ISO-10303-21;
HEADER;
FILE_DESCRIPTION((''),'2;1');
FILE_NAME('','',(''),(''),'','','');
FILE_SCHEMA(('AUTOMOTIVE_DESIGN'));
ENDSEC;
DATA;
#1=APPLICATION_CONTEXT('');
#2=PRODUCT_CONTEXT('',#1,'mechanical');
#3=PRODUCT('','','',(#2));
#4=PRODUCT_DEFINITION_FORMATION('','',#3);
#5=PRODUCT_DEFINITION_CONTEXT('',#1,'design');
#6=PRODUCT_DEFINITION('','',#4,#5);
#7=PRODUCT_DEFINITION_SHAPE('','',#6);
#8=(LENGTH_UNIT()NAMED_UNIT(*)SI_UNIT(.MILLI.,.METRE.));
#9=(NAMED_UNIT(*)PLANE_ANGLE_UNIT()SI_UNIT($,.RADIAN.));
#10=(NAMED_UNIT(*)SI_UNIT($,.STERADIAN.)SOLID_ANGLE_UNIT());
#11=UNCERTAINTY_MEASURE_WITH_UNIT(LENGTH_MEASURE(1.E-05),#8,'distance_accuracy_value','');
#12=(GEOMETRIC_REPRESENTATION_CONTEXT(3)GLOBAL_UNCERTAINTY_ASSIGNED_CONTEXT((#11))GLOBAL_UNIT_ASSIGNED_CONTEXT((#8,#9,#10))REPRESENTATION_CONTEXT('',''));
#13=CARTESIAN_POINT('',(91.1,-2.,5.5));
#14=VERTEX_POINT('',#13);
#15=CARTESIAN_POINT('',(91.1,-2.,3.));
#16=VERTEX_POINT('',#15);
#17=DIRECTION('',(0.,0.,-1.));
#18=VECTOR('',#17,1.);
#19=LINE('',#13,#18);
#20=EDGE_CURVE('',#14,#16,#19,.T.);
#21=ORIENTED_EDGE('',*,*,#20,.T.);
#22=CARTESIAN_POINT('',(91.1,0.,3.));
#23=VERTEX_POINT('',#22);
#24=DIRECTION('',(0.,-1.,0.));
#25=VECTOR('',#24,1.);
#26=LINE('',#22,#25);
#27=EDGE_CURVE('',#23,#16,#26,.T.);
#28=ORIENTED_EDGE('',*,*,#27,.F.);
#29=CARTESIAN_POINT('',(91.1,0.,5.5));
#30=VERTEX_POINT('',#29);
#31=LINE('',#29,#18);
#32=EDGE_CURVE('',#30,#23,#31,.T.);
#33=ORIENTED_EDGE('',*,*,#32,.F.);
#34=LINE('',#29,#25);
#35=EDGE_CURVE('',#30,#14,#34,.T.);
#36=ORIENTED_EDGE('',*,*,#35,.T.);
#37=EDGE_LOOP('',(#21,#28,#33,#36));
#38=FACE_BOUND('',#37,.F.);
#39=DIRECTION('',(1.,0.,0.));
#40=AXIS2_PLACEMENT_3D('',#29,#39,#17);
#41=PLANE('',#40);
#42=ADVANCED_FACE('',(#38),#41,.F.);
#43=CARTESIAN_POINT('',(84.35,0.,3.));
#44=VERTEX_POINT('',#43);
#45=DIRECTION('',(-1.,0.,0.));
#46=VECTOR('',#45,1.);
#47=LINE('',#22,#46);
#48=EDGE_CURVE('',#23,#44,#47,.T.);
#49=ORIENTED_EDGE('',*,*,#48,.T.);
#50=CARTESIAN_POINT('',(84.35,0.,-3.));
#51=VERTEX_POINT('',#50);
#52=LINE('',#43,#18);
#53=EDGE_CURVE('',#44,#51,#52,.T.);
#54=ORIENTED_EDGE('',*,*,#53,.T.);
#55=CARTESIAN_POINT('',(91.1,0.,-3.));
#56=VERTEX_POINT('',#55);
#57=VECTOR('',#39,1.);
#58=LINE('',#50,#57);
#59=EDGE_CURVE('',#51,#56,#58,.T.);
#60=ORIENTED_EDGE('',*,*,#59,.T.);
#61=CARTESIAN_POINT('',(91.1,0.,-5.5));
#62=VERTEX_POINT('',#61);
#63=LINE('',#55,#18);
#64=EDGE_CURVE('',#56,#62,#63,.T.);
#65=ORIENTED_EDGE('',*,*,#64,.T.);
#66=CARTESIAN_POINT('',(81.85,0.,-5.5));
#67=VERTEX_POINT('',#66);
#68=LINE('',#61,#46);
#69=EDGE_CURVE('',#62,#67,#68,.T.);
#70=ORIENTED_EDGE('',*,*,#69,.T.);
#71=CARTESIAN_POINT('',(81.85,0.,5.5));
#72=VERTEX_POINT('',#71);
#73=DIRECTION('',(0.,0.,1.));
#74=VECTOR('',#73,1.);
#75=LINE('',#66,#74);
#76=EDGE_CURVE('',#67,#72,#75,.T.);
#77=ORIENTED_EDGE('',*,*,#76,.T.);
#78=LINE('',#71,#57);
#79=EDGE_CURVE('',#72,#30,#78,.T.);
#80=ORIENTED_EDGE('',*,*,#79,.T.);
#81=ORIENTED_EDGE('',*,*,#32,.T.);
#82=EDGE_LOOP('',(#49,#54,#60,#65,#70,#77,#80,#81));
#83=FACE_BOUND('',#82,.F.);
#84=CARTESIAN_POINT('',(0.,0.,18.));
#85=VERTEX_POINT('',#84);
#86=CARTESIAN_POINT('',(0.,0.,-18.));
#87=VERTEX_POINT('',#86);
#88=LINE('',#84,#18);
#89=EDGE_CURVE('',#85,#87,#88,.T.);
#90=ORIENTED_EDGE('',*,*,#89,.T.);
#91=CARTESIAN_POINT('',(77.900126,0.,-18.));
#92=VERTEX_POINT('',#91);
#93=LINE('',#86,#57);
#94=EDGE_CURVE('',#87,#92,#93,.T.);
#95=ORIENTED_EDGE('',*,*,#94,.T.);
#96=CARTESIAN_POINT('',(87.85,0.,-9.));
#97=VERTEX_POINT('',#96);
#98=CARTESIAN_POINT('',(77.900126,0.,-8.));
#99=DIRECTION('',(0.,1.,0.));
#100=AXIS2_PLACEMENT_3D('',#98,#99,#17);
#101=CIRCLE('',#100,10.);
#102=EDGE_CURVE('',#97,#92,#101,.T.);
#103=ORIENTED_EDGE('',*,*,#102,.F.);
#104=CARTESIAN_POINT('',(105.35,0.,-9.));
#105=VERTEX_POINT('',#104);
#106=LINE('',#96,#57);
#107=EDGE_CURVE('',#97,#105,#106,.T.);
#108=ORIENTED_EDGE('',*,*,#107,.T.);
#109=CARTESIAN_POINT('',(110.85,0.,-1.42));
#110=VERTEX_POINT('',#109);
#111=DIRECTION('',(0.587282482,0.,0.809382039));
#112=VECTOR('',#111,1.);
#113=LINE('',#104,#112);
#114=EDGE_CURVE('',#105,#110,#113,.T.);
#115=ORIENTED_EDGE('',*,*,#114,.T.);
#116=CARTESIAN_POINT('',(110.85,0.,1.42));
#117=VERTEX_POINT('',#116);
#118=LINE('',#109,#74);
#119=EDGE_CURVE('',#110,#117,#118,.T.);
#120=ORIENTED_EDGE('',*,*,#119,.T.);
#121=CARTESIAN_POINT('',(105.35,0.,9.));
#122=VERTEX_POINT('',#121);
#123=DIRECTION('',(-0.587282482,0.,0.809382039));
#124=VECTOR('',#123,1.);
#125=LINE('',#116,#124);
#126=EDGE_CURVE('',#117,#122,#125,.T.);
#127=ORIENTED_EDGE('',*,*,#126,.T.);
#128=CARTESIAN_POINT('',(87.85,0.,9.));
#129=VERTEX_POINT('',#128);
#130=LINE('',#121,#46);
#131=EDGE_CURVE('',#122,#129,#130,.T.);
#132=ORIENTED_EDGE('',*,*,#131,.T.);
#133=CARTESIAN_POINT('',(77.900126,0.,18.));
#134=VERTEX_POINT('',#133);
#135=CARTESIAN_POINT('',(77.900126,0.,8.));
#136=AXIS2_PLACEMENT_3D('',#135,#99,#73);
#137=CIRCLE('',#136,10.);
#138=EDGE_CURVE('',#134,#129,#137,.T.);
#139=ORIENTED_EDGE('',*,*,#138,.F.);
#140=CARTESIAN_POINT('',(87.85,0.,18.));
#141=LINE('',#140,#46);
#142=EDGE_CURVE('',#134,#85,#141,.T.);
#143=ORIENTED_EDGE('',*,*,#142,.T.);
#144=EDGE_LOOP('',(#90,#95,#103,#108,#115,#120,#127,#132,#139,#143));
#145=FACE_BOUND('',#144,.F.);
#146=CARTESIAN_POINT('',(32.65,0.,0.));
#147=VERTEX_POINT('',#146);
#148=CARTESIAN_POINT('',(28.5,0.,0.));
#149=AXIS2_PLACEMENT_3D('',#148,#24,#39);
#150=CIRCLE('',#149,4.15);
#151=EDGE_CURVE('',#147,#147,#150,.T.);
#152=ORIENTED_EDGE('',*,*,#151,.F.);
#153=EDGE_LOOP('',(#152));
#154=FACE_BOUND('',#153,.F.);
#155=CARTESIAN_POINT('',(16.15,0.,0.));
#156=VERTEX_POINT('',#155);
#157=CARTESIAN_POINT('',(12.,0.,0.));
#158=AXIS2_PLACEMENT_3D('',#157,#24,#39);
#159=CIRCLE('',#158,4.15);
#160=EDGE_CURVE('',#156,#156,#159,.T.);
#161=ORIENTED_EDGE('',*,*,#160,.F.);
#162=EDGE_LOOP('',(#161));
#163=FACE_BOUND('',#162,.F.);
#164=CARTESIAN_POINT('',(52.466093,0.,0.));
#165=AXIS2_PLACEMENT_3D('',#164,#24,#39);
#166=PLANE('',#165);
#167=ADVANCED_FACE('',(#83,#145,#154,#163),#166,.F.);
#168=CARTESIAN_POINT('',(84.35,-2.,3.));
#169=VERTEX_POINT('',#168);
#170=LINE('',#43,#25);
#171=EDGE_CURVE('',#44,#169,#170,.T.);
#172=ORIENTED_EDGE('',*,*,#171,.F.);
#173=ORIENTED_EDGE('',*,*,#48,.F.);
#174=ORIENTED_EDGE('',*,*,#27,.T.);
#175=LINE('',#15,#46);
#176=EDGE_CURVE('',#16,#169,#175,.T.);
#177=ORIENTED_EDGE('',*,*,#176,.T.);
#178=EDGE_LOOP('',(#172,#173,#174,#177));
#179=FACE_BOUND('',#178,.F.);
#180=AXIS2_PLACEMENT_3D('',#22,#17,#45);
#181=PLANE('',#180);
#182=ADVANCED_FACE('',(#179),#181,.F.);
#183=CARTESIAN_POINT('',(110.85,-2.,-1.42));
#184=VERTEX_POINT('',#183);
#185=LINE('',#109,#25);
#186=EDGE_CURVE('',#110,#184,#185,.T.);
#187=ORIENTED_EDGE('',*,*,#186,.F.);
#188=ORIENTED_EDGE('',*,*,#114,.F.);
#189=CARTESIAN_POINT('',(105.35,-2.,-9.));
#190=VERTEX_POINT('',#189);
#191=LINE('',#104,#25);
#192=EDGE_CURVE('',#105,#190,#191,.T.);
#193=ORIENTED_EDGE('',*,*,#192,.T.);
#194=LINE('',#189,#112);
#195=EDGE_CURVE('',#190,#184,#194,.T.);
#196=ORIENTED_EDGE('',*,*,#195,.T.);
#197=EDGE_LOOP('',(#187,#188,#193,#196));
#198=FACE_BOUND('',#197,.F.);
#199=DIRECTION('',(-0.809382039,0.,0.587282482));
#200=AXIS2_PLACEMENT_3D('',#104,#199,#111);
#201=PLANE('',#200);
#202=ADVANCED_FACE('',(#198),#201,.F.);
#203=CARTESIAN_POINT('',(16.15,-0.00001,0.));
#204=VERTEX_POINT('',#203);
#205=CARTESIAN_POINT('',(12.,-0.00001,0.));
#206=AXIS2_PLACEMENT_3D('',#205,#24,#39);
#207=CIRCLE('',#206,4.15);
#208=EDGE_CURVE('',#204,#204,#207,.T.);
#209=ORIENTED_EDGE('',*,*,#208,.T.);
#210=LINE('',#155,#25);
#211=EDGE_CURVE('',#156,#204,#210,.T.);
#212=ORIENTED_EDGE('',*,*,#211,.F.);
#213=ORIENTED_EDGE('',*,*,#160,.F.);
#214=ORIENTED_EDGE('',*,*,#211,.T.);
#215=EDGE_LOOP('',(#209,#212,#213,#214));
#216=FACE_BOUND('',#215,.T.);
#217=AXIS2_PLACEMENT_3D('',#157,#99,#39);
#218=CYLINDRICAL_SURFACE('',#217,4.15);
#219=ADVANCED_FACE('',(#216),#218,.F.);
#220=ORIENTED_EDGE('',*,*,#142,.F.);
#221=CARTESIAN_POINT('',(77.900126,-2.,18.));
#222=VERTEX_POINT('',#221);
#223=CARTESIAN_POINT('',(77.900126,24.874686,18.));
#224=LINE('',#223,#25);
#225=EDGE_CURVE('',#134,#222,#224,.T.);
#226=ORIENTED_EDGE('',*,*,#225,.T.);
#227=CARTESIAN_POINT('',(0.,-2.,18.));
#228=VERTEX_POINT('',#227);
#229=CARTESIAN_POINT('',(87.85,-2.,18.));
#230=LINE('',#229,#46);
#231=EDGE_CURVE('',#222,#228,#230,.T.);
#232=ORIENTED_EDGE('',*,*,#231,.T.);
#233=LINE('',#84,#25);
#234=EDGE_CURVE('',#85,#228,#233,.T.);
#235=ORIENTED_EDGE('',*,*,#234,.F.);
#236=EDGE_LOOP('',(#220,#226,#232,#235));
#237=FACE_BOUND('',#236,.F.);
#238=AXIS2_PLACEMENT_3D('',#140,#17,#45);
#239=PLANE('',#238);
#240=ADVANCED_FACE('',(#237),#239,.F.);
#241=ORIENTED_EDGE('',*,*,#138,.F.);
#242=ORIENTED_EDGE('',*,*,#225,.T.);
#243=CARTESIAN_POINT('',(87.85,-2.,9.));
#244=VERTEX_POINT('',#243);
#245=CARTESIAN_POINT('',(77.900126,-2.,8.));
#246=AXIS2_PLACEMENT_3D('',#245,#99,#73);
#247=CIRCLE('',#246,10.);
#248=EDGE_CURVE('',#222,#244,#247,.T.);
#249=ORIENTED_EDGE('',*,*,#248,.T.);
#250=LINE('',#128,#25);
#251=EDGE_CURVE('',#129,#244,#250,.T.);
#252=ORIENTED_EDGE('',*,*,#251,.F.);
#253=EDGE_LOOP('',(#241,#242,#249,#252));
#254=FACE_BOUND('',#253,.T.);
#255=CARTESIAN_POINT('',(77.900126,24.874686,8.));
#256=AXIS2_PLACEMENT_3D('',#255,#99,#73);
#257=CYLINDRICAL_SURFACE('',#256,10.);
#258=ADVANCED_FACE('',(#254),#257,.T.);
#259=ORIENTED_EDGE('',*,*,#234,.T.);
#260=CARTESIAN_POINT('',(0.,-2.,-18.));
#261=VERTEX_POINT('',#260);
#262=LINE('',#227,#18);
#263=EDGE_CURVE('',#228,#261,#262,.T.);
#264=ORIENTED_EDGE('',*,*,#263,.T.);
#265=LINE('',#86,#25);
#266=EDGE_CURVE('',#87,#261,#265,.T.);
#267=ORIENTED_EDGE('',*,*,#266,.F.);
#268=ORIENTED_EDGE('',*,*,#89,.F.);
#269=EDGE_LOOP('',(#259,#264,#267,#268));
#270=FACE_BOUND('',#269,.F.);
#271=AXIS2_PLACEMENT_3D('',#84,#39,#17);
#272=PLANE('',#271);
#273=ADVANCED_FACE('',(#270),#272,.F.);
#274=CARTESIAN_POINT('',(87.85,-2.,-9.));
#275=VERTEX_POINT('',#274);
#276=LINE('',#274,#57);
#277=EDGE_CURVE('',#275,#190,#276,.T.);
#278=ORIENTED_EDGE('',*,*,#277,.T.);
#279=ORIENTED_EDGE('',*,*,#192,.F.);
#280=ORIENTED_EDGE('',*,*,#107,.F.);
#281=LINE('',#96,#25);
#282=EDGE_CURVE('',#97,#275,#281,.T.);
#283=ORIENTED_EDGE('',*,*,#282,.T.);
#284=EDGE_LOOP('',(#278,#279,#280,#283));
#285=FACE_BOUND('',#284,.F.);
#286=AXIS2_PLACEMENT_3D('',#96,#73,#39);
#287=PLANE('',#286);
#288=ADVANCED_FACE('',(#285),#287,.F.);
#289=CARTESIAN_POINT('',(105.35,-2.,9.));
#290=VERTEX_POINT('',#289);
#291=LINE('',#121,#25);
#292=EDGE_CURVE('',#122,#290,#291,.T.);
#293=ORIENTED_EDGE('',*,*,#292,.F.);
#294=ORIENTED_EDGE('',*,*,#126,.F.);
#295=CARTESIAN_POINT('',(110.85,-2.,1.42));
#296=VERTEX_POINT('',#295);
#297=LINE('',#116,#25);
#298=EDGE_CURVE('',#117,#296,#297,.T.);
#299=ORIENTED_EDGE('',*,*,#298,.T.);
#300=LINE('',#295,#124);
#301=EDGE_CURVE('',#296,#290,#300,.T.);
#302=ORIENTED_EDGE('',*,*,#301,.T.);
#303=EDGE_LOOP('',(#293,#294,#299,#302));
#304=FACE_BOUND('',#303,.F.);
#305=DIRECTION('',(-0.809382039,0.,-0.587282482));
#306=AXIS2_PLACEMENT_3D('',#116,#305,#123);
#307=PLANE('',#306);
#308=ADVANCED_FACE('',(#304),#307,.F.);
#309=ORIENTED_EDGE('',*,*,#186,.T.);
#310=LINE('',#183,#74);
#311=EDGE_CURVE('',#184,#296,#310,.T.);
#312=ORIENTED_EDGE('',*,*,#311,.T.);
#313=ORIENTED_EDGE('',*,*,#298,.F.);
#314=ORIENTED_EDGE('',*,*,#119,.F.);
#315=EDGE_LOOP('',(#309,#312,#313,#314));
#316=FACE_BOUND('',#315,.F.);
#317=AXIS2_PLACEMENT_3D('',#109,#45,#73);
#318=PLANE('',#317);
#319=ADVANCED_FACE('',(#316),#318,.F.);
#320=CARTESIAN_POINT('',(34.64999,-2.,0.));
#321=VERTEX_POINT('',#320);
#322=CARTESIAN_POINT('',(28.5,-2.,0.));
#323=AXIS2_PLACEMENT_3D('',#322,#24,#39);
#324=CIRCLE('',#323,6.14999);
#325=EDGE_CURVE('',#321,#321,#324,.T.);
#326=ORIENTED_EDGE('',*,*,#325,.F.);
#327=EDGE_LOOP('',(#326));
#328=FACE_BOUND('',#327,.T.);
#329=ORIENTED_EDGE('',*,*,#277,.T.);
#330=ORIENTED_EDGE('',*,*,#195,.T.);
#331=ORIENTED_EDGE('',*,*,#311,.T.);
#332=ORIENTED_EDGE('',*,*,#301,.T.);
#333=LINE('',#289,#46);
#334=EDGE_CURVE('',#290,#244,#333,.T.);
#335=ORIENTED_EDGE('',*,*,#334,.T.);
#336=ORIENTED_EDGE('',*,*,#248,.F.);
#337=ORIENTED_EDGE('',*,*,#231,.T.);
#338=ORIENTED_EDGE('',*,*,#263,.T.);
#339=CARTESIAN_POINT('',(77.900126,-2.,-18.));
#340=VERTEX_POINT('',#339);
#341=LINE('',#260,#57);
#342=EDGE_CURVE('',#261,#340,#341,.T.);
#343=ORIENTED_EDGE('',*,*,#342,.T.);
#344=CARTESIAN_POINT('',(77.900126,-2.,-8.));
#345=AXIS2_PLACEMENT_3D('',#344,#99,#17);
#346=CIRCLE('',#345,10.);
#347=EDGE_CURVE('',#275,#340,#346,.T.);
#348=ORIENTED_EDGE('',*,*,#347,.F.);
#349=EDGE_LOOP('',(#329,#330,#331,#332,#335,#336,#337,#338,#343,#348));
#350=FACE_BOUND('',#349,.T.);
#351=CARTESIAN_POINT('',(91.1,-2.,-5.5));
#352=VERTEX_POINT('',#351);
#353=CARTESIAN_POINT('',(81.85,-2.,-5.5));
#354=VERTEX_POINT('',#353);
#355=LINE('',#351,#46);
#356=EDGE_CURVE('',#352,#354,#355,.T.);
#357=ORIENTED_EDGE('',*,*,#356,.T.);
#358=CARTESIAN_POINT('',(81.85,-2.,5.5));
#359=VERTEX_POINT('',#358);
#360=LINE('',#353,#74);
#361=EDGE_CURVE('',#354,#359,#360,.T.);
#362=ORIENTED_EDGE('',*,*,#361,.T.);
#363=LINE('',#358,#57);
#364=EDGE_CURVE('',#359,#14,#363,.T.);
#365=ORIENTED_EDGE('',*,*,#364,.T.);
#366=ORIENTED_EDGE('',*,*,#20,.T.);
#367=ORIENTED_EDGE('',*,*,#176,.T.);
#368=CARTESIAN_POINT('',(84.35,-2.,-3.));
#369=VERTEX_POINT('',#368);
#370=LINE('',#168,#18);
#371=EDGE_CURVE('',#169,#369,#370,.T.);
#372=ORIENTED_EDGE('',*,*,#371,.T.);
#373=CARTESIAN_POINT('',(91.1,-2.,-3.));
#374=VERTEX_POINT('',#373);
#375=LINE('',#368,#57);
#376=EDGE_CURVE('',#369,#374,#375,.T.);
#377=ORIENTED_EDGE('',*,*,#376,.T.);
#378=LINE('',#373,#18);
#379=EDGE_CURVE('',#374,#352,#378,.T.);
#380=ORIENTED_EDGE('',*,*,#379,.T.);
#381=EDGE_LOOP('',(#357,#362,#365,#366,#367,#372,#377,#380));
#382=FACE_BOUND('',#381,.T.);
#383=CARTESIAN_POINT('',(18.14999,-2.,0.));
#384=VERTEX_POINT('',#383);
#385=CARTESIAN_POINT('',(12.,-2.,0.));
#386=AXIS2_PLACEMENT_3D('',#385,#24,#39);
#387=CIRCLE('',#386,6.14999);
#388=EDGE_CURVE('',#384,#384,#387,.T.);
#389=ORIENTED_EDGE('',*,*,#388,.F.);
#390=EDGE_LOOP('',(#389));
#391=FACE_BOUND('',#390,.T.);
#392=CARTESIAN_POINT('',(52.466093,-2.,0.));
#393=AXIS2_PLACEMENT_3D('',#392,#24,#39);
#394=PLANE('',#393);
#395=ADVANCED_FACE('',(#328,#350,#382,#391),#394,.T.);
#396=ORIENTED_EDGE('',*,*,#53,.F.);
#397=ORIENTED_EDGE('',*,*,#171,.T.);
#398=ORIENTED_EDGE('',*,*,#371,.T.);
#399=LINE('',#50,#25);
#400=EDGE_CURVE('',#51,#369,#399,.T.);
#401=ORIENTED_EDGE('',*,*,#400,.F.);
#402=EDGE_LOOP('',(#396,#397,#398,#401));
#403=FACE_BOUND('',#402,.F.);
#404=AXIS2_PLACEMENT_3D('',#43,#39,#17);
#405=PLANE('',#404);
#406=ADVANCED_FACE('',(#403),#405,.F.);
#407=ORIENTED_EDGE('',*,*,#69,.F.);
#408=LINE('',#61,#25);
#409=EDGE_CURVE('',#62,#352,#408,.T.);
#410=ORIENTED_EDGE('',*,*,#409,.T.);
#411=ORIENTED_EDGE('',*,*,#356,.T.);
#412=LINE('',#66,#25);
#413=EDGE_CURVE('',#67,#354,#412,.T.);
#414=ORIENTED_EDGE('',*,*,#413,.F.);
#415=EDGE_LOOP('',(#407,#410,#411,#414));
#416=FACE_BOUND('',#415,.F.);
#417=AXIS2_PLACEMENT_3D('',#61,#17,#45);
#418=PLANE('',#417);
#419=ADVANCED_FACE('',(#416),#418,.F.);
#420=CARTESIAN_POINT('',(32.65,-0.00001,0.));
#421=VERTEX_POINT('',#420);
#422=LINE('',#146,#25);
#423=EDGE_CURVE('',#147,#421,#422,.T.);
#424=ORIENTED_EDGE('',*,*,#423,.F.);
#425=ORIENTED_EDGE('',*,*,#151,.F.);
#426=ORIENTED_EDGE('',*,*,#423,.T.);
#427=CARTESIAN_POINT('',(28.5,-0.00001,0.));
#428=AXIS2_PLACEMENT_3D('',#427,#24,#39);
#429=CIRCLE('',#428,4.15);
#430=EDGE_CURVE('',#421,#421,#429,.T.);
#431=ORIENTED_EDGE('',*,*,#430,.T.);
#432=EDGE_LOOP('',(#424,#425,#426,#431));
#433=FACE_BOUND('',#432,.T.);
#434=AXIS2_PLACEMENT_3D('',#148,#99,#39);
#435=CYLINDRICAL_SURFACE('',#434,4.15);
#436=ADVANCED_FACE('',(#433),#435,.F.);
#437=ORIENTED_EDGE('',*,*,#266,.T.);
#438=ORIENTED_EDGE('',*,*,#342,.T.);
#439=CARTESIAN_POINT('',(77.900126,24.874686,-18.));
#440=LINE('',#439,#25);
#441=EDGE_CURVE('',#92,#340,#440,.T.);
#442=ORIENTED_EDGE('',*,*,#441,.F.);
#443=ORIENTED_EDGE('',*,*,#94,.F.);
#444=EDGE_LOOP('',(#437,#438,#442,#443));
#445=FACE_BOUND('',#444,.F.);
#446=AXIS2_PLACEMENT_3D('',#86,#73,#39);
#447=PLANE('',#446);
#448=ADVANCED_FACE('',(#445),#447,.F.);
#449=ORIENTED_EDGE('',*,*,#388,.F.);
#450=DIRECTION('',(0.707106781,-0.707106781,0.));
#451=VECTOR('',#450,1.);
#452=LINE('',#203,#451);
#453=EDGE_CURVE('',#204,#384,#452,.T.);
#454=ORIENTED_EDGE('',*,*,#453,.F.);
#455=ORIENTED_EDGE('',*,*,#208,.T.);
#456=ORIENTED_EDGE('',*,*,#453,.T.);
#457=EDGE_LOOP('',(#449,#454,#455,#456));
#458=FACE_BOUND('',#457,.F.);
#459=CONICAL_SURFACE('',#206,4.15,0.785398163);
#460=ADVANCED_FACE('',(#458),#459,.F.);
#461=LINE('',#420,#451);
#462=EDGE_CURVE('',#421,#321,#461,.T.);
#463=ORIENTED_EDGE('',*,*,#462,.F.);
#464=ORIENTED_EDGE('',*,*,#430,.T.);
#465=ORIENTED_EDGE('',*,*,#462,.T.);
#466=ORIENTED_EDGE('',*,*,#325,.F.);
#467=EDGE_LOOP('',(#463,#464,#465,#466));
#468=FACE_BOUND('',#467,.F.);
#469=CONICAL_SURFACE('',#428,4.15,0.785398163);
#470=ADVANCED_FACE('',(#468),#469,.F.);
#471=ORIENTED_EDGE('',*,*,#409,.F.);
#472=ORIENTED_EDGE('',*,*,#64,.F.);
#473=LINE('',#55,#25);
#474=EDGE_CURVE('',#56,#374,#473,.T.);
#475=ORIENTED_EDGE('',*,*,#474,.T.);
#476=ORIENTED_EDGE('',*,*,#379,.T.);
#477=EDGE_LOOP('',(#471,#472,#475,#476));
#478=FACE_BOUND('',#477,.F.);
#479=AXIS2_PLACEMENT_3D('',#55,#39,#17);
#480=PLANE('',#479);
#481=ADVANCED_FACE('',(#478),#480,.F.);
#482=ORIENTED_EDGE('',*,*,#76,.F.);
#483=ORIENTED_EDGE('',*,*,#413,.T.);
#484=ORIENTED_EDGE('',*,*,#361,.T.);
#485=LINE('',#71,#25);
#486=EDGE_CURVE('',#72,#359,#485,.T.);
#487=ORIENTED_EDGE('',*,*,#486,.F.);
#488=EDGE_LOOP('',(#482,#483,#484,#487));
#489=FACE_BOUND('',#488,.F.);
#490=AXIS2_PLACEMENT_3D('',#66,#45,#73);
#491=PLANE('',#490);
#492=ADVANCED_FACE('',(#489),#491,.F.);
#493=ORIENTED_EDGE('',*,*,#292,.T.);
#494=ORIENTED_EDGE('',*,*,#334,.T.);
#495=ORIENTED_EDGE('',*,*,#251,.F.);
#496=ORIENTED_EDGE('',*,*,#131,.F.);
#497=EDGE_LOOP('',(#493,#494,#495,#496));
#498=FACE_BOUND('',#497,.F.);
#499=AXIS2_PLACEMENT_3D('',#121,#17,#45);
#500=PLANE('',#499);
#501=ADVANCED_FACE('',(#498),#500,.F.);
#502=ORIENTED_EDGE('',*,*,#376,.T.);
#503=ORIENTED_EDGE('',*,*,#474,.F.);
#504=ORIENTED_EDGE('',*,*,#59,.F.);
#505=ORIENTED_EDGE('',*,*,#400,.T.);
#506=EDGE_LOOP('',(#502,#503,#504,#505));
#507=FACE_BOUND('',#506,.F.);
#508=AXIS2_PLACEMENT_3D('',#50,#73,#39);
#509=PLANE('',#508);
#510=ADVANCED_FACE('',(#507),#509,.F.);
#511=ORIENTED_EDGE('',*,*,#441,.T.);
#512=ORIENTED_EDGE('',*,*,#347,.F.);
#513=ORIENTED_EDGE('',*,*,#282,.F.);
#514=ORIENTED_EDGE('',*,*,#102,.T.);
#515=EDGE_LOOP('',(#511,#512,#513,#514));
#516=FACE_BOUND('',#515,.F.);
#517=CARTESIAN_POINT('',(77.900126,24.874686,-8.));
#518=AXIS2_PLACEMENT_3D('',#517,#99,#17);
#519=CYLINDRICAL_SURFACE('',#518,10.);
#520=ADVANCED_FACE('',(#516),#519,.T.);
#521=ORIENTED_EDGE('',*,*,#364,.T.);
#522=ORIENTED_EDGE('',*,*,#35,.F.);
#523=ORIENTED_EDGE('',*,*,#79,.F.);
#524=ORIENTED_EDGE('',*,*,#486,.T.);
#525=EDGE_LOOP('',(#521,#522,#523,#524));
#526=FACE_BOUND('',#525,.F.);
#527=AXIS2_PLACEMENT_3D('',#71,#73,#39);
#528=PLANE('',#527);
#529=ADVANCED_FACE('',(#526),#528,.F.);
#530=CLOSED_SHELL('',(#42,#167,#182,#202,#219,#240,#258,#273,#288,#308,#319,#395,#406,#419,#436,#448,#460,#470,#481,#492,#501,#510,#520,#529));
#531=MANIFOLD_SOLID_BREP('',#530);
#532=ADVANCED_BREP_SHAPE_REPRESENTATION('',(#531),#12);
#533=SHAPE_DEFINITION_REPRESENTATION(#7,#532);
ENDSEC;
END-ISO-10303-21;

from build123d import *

# Parameters (mm, degrees)
F0_R        = 4.15
F1_DEPTH    = 2
F2_SIZE     = 1.99999
F3_T1_DEPTH = 51.7493718553


# Not quite as in the source:
# - a fillet or chamfer that OpenCascade refuses, or shapes differently, is made with other operations: its cross-section is extruded or revolved along the edge and cut away or added
# - a fillet or chamfer is up to 0.001 mm smaller than in the source, because OpenCascade refuses the exact size


with BuildPart() as f1:
    # F0 (on Front) → F1 (new body)
    with BuildSketch(Plane.XZ):
        Polygon((87.85, 18), (0, 18), (0, -18), (87.85, -18), (87.85, -9), (105.35, -9), (110.85, -1.42), (110.85, 1.42), (105.35, 9), (87.85, 9), align=None)
        with Locations((12, 0)):
            Circle(F0_R, mode=Mode.SUBTRACT)
        with Locations((28.5, 0)):
            Circle(F0_R, mode=Mode.SUBTRACT)
        Polygon((91.1, 5.5), (91.1, 3), (84.35, 3), (84.35, -3), (91.1, -3), (91.1, -5.5), (81.85, -5.5), (81.85, 5.5), align=None, mode=Mode.SUBTRACT)
    extrude(amount=F1_DEPTH)

    # F2 (size 2 in the source; OpenCascade refuses exactly that, so slightly less here)
    f2_edges = [f1.edges().sort_by_distance(p)[0] for p in [
        (7.85, -2, 0),
        (24.35, -2, 0),
    ]]
    chamfer(f2_edges, length=F2_SIZE)

    # F3: fillet of radius 10 on 2 edges, made by hand

    # F3_s2 → F3_t1 (cut)
    with BuildSketch(Plane.XZ.offset(-24.8746859277)):
        with BuildLine():
            ThreePointArc((77.9001256289, 18), (84.6083295614, 15.4161984871), (87.85, 9))
            Line((87.85, 9), (87.85, 18))
            Line((87.85, 18), (77.9001256289, 18))
        make_face()
        with BuildLine():
            ThreePointArc((77.9001256289, -18), (84.6083295614, -15.4161984871), (87.85, -9))
            Line((87.85, -9), (87.85, -18))
            Line((87.85, -18), (77.9001256289, -18))
        make_face()
    extrude(amount=F3_T1_DEPTH, mode=Mode.SUBTRACT)


solid = f1.part
